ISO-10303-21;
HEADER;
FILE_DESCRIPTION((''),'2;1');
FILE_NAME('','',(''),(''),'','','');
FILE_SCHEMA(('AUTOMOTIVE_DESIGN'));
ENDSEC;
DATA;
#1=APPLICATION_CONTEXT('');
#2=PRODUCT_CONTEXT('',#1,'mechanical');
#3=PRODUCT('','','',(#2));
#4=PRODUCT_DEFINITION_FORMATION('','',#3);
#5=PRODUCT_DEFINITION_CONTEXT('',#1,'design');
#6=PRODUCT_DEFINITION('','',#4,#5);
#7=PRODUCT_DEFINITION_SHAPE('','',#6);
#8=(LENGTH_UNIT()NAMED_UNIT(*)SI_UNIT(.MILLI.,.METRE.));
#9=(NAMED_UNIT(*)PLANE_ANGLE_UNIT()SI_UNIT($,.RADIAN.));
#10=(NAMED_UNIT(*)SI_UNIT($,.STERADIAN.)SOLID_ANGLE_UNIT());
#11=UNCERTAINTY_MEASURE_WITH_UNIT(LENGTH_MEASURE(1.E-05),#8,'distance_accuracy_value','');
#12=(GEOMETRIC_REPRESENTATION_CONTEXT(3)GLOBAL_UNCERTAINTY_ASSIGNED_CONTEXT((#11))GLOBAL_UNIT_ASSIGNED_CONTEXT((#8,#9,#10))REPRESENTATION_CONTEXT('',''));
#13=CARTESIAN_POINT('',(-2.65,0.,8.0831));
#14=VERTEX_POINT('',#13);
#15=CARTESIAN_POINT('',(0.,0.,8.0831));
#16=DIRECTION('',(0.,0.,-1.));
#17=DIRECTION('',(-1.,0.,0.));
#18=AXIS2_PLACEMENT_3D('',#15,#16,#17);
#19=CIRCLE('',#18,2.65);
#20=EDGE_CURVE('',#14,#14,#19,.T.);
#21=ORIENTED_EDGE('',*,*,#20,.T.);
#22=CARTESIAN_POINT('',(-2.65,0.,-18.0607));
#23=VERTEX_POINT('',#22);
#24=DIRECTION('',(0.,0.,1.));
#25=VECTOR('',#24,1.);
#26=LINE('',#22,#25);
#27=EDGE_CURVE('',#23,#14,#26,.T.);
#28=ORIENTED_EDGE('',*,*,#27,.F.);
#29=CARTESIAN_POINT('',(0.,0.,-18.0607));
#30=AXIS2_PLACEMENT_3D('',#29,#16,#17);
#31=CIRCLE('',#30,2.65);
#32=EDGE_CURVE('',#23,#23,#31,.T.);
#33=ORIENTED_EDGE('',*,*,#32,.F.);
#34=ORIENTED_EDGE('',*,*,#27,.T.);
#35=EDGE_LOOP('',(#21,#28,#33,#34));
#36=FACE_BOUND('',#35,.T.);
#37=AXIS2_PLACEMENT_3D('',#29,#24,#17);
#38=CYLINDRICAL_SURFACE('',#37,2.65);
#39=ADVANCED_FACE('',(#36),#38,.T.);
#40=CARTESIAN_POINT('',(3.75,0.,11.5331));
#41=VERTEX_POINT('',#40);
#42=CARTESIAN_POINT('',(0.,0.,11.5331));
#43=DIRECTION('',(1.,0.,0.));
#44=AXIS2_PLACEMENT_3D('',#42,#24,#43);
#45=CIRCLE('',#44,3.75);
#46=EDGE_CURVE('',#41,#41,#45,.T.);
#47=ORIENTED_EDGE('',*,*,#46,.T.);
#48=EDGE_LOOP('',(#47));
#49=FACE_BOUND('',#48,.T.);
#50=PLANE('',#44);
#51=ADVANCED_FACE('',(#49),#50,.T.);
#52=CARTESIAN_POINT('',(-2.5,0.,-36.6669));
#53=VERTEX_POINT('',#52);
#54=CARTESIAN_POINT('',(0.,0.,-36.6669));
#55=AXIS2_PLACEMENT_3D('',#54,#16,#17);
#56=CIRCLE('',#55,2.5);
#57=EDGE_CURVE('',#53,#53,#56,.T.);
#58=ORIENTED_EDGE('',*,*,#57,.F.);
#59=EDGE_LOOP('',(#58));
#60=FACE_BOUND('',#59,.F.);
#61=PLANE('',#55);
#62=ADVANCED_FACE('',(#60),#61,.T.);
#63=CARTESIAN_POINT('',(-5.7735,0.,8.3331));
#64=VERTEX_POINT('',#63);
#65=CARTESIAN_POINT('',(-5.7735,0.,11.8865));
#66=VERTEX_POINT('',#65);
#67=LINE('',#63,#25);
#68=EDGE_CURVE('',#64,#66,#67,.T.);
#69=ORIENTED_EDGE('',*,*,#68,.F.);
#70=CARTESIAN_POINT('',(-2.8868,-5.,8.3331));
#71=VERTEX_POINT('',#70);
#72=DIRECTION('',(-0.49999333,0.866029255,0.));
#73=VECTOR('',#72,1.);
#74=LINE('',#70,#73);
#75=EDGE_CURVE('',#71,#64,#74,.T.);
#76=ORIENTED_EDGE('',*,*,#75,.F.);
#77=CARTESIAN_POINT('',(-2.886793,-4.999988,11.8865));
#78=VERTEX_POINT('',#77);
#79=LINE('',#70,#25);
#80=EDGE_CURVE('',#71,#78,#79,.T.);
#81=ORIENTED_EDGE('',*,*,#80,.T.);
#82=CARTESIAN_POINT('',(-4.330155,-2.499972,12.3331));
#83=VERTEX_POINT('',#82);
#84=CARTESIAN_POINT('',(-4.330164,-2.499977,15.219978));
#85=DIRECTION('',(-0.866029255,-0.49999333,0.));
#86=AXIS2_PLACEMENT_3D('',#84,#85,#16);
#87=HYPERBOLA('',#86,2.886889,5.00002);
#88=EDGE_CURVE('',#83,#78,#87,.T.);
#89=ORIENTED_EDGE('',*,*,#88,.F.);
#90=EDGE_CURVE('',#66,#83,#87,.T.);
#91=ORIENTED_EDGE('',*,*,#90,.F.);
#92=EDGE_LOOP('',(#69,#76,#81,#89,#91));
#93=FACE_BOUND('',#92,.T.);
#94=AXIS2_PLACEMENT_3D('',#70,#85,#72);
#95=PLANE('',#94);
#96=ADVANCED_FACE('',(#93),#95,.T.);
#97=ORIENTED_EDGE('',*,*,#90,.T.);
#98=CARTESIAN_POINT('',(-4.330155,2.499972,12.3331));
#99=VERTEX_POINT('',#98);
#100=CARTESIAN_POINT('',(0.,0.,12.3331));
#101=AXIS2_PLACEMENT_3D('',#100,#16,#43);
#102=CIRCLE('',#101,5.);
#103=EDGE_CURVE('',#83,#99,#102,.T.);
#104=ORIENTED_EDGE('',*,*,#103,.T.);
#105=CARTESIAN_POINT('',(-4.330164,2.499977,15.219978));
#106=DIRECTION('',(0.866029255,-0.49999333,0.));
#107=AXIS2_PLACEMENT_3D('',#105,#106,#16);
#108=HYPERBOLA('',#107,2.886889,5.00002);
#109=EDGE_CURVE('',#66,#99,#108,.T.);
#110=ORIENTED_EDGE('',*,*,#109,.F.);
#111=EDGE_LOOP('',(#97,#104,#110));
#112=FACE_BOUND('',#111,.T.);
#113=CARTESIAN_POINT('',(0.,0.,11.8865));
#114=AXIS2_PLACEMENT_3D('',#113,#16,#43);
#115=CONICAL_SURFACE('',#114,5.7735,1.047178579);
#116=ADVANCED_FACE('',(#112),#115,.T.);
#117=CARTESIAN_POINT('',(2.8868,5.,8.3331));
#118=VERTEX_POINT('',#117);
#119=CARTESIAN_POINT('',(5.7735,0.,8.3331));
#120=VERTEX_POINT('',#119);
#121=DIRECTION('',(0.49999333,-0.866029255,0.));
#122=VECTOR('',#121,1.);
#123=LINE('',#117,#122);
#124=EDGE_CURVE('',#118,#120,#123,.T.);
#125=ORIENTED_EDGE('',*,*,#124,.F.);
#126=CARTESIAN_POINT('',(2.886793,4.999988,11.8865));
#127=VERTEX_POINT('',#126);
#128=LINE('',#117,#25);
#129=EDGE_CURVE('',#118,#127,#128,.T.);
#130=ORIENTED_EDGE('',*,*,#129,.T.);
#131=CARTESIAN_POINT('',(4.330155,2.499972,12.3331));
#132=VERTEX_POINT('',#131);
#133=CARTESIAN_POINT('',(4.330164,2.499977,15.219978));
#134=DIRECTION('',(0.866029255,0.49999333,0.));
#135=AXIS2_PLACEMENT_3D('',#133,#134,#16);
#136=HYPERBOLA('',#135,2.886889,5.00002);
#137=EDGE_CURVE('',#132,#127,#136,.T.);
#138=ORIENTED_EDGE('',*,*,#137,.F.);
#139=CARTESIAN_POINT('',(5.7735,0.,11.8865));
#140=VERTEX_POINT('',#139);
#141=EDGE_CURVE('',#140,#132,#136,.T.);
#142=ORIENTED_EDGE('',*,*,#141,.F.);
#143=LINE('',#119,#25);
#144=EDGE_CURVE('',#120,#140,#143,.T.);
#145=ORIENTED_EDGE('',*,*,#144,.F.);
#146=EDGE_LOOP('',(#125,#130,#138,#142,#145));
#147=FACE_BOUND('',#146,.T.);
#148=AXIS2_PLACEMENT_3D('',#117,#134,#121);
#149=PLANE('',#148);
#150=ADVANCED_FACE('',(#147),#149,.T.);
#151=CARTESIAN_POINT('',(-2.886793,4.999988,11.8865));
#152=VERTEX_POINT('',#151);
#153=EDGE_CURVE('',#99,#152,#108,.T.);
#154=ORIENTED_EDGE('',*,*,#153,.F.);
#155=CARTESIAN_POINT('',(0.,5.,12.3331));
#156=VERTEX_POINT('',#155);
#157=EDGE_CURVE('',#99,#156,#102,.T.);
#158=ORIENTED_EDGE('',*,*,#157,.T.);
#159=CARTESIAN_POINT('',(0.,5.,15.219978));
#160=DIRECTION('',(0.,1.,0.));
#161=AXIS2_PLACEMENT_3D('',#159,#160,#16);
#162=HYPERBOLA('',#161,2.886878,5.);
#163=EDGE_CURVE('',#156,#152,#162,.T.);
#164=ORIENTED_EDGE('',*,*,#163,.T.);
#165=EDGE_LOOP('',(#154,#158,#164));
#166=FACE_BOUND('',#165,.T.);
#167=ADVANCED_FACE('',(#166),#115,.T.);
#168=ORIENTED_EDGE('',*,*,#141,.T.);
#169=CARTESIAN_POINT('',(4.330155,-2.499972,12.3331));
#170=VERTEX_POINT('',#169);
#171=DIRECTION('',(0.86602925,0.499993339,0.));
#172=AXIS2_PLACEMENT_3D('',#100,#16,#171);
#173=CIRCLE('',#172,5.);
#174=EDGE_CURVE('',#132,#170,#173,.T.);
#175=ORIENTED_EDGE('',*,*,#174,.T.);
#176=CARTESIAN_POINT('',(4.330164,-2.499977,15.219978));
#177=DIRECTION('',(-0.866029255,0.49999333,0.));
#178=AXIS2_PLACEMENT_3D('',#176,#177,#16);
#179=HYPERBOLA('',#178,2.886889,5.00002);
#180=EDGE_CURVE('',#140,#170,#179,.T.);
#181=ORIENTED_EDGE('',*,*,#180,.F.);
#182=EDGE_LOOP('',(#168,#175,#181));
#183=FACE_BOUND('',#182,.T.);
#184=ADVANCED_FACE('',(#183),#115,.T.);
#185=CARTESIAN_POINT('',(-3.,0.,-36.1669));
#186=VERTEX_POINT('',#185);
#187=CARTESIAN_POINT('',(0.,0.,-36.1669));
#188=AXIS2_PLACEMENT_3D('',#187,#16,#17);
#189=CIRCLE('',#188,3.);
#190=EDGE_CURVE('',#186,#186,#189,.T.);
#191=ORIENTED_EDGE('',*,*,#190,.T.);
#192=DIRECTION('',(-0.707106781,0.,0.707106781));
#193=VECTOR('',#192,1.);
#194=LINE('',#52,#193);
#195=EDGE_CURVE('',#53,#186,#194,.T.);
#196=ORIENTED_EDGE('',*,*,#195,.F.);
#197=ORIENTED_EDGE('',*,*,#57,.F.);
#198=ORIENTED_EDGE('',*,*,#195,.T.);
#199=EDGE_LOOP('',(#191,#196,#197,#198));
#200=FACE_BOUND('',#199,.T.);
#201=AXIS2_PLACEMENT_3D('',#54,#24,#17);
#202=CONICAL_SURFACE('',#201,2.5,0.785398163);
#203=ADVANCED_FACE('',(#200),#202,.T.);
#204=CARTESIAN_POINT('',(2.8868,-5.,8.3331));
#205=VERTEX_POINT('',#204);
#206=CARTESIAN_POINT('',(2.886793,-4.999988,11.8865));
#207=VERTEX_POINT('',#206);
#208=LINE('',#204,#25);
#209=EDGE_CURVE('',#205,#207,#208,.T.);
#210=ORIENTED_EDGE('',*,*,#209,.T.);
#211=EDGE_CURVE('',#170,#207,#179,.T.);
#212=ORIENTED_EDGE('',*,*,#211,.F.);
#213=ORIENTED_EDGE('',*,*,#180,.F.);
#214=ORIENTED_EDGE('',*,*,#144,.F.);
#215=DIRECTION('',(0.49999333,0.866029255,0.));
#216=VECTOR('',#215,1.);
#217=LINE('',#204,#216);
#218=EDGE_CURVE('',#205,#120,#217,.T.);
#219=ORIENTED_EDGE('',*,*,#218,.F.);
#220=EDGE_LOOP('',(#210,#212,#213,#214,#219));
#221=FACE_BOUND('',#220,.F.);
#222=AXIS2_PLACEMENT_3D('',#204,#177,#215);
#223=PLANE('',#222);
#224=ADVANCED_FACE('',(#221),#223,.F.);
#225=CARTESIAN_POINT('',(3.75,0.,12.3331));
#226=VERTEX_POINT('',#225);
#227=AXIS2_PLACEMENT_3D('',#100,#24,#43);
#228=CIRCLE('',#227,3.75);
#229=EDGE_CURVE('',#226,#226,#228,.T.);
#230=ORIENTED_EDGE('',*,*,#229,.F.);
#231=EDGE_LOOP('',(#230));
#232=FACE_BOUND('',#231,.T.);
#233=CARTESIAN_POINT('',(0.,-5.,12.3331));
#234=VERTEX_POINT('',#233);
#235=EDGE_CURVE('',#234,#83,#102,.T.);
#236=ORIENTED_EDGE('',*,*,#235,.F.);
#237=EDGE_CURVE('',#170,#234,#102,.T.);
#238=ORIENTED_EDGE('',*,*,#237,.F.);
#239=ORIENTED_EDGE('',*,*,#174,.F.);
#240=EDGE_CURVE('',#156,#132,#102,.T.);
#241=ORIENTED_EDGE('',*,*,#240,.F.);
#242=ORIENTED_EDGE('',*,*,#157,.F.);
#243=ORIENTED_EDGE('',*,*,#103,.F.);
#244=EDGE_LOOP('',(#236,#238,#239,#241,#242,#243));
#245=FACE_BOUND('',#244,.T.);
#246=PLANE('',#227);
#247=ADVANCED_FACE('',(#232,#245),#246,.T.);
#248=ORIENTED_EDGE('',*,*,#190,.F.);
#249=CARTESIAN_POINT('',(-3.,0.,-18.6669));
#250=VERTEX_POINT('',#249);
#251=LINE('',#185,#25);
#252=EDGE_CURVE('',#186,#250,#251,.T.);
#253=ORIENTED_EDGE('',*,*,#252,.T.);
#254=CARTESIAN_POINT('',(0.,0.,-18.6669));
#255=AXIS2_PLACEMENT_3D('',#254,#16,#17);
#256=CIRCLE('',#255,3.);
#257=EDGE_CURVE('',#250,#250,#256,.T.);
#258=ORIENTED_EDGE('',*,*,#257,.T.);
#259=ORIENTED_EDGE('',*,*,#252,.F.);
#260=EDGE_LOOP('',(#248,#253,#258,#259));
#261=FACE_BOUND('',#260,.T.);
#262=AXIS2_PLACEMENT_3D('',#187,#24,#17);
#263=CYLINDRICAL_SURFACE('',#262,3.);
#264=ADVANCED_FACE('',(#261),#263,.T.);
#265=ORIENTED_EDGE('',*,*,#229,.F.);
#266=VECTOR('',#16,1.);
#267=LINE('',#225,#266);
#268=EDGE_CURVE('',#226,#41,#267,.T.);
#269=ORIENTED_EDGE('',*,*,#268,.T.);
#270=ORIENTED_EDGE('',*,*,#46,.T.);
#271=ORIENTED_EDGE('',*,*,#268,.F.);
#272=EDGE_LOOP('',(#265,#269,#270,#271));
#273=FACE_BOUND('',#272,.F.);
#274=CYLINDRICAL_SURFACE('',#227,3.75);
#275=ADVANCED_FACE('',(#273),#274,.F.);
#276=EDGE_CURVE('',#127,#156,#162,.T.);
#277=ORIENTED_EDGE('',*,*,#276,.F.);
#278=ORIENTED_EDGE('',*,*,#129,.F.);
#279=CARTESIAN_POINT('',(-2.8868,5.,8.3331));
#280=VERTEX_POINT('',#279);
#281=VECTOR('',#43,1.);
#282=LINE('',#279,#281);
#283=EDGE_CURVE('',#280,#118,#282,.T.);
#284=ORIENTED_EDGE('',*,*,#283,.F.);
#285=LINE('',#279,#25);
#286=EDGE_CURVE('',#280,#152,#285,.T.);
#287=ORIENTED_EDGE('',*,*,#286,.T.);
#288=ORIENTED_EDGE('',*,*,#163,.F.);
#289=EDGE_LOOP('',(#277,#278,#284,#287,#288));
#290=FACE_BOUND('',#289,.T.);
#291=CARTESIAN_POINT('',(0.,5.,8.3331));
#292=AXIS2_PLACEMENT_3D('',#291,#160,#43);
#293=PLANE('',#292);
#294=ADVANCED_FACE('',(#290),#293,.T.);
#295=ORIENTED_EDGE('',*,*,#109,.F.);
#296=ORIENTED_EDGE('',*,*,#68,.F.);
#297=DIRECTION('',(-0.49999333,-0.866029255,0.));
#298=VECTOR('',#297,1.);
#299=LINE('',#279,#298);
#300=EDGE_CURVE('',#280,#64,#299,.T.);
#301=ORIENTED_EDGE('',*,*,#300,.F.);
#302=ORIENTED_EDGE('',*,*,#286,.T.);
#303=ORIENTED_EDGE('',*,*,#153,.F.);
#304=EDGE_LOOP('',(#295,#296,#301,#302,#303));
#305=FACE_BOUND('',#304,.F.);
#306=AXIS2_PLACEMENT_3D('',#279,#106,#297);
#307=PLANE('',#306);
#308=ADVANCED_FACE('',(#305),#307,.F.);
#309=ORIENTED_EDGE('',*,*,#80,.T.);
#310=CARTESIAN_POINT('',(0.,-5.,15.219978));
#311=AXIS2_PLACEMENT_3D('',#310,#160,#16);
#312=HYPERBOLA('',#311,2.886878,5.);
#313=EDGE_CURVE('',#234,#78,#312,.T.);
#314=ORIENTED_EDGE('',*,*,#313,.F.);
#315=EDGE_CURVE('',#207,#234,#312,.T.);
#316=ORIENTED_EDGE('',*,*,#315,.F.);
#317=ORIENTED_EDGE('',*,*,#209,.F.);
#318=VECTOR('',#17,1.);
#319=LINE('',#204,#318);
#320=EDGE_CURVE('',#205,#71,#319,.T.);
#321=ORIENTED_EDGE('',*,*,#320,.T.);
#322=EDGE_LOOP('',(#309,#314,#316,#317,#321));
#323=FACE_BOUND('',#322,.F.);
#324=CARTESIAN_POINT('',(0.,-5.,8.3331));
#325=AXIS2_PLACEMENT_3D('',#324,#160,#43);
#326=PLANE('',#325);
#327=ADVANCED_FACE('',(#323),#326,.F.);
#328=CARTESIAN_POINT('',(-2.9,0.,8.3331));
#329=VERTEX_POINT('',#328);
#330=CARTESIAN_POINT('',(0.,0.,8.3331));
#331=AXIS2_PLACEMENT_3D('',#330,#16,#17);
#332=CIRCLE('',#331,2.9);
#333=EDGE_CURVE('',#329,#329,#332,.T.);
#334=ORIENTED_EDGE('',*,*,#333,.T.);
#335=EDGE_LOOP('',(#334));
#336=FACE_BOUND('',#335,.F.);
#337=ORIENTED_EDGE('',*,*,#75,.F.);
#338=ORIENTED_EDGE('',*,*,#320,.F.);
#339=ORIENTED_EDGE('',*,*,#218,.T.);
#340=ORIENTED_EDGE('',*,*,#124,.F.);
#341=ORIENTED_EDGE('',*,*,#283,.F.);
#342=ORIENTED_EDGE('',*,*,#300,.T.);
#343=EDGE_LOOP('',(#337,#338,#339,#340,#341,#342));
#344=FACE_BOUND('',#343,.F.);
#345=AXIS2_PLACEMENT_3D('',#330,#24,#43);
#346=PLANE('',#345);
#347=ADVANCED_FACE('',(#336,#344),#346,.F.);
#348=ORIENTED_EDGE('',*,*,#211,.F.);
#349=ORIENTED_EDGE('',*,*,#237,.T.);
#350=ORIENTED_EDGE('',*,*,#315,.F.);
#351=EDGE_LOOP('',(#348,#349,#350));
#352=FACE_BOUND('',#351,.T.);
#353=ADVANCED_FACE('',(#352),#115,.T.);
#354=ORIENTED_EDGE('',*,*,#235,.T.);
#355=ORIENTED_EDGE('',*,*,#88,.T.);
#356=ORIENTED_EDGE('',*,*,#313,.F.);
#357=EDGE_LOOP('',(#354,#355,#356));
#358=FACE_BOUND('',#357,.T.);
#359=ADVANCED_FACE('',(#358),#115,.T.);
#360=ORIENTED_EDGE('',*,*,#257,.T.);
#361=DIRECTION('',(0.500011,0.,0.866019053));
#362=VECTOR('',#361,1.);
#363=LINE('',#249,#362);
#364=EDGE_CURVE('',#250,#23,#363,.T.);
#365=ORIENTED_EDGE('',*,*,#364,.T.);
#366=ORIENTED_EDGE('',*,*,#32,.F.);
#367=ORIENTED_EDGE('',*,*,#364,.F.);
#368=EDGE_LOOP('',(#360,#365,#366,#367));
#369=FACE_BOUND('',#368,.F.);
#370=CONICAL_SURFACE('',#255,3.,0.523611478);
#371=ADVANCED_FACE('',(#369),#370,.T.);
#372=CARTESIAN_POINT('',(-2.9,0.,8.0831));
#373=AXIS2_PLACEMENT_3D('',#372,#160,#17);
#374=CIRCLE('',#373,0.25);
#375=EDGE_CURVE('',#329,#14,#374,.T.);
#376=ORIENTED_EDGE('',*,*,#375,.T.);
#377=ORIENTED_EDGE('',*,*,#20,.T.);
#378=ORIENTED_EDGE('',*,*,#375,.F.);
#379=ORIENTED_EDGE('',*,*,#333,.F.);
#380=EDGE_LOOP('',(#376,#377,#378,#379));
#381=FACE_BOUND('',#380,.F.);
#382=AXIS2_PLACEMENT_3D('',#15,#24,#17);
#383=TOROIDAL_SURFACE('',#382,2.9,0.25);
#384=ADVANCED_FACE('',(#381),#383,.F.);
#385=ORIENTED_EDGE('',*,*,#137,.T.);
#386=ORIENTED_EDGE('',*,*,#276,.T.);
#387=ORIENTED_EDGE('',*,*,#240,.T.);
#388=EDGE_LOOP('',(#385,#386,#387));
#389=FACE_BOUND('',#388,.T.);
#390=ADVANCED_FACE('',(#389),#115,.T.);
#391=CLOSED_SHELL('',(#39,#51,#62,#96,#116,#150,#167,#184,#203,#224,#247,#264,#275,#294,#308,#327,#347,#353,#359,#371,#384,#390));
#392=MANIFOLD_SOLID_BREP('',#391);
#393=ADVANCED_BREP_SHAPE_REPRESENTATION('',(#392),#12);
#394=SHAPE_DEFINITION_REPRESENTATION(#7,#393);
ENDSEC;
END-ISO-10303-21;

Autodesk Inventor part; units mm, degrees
ref_plane "YZ Plane" through (0, 0, 0) normal (1, 0, 0) x (0, 1, 0)
sketch "Sketch2" plane through (0, 0, 0) normal (0, 1, 0) x (-1, 0, 0)
  line L0 (0, 8.3331) -> (0, -36.6669)
  line L1 (0, -36.6669) -> (2.5, -36.6669)
  line L2 (3, -36.1669) -> (3, -18.6669)
  line L3 (3, -18.6669) -> (2.65, -18.0607)
  line L4 (2.65, -18.0607) -> (2.65, 8.3331)
  line L5 (2.65, 8.3331) -> (0, 8.3331)
  line L6 (2.5, -36.6669) -> (3, -36.1669)
  line L7 (3, -36.6669) -> (3, -37.374)
  line L8 (0, -46.5155) -> (0, 17.4745) projected
  dimension "Ds" = 5.3
  dimension "NND" = 6
  dimension "b" = 18
  dimension "d3" = 30
  dimension "d5" = 45
  dimension "PTC" = 1
  dimension "NLG" = 45
revolve "Revolution1" add sketch "Sketch2" angle 360 about axis through (0, 0, 8.3331) along (0, 0, -1)
sketch "Sketch3" plane through (0, 0, 8.3331) normal (0, 0, 1) x (1, 0, 0)
  circle A0 centre (0, 0) radius 2.65 projected
  line L0 (0, 5) -> (2.8868, 5)
  line L1 (2.8868, 5) -> (5.7735, 0)
  line L2 (5.7735, 0) -> (0, 0)
  line L3 (0, 0) -> (0, 5)
  line L4 (0, 5) -> (-2.8868, 5)
  line L5 (-2.8868, 5) -> (-5.7735, 0)
  line L6 (0, -5) -> (2.8868, -5)
  line L7 (2.8868, -5) -> (5.7735, 0)
  line L8 (-2.8868, -5) -> (-5.7735, 0)
  line L9 (0, -5) -> (-2.8868, -5)
  dimension "d9" = 60
  dimension "ParS" = 10
  dimension "msp_d11" = 10
extrude "Extrusion1" add sketch "Sketch3" along normal blind 4
sketch "Sketch4" plane through (0, 0, 0) normal (0, 1, 0) x (-1, 0, 0)
  line L0 (-5, 12.3331) -> (-5.7735, 12.3331)
  line L1 (-5.7735, 12.3331) -> (-5.7735, 11.8865)
  line L2 (-5.7735, 11.8865) -> (-5, 12.3331)
  line L3 (0, 4.4746) -> (0, 31.4838) projected
  line L4 (0, 27.6253) -> (0, 27.1787)
  line L5 (-5.7735, 8.3331) -> (-5.7735, 12.3331) projected
  line L6 (-2.8868, 12.3331) -> (-5.7735, 12.3331) projected
  dimension "d14" = 30
  dimension "msp_d15" = 10
revolve "Revolution2" cut sketch "Sketch4" angle 360 about axis through (0, 0, 27.6253) along (0, 0, -1)
sketch "Sketch5" plane through (0, 0, 12.3331) normal (0, 0, 1) x (1, 0, 0)
  arc A0 (4.3301, 2.5) -> (0, 5) centre (0, 0) ccw projected
  circle A1 centre (0, 0) radius 3.75
  dimension "d27" = 7.5
extrude "Extrusion2" cut sketch "Sketch5" against normal blind 0.8
thread "Thread1" size "M6x1" class "6g" standard "ISO Metric profile" full length
ref_plane "MSC_PF1" through (0, 0, 0) normal (0, 1, 0) x (-1, 0, 0)
ref_plane "MSC_PT1" through (0, 0, 8.3331) normal (0, 0, -1) x (-1, 0, 0)
fillet "Fillet1" radius 0.25 1 edges at (2.65, 0, 8.3331)
equation "\"msp_d11\" = ParS"
equation "\"msp_d15\" = ParS"
equation "\"d27\" = 0.75 * ParS"
equation "\"d28\" = 0.2 * ParK"
equation "\"d30\" = r"
equation "\"msp_d17\" = b"
equation "\"r\" = 0.25"
equation "\"THREADDIA\" = NND"
equation "\"ParK\" = 4"
properties part number "ISO 4015 - M6 x 45" material "Stainless Steel, 440C"
